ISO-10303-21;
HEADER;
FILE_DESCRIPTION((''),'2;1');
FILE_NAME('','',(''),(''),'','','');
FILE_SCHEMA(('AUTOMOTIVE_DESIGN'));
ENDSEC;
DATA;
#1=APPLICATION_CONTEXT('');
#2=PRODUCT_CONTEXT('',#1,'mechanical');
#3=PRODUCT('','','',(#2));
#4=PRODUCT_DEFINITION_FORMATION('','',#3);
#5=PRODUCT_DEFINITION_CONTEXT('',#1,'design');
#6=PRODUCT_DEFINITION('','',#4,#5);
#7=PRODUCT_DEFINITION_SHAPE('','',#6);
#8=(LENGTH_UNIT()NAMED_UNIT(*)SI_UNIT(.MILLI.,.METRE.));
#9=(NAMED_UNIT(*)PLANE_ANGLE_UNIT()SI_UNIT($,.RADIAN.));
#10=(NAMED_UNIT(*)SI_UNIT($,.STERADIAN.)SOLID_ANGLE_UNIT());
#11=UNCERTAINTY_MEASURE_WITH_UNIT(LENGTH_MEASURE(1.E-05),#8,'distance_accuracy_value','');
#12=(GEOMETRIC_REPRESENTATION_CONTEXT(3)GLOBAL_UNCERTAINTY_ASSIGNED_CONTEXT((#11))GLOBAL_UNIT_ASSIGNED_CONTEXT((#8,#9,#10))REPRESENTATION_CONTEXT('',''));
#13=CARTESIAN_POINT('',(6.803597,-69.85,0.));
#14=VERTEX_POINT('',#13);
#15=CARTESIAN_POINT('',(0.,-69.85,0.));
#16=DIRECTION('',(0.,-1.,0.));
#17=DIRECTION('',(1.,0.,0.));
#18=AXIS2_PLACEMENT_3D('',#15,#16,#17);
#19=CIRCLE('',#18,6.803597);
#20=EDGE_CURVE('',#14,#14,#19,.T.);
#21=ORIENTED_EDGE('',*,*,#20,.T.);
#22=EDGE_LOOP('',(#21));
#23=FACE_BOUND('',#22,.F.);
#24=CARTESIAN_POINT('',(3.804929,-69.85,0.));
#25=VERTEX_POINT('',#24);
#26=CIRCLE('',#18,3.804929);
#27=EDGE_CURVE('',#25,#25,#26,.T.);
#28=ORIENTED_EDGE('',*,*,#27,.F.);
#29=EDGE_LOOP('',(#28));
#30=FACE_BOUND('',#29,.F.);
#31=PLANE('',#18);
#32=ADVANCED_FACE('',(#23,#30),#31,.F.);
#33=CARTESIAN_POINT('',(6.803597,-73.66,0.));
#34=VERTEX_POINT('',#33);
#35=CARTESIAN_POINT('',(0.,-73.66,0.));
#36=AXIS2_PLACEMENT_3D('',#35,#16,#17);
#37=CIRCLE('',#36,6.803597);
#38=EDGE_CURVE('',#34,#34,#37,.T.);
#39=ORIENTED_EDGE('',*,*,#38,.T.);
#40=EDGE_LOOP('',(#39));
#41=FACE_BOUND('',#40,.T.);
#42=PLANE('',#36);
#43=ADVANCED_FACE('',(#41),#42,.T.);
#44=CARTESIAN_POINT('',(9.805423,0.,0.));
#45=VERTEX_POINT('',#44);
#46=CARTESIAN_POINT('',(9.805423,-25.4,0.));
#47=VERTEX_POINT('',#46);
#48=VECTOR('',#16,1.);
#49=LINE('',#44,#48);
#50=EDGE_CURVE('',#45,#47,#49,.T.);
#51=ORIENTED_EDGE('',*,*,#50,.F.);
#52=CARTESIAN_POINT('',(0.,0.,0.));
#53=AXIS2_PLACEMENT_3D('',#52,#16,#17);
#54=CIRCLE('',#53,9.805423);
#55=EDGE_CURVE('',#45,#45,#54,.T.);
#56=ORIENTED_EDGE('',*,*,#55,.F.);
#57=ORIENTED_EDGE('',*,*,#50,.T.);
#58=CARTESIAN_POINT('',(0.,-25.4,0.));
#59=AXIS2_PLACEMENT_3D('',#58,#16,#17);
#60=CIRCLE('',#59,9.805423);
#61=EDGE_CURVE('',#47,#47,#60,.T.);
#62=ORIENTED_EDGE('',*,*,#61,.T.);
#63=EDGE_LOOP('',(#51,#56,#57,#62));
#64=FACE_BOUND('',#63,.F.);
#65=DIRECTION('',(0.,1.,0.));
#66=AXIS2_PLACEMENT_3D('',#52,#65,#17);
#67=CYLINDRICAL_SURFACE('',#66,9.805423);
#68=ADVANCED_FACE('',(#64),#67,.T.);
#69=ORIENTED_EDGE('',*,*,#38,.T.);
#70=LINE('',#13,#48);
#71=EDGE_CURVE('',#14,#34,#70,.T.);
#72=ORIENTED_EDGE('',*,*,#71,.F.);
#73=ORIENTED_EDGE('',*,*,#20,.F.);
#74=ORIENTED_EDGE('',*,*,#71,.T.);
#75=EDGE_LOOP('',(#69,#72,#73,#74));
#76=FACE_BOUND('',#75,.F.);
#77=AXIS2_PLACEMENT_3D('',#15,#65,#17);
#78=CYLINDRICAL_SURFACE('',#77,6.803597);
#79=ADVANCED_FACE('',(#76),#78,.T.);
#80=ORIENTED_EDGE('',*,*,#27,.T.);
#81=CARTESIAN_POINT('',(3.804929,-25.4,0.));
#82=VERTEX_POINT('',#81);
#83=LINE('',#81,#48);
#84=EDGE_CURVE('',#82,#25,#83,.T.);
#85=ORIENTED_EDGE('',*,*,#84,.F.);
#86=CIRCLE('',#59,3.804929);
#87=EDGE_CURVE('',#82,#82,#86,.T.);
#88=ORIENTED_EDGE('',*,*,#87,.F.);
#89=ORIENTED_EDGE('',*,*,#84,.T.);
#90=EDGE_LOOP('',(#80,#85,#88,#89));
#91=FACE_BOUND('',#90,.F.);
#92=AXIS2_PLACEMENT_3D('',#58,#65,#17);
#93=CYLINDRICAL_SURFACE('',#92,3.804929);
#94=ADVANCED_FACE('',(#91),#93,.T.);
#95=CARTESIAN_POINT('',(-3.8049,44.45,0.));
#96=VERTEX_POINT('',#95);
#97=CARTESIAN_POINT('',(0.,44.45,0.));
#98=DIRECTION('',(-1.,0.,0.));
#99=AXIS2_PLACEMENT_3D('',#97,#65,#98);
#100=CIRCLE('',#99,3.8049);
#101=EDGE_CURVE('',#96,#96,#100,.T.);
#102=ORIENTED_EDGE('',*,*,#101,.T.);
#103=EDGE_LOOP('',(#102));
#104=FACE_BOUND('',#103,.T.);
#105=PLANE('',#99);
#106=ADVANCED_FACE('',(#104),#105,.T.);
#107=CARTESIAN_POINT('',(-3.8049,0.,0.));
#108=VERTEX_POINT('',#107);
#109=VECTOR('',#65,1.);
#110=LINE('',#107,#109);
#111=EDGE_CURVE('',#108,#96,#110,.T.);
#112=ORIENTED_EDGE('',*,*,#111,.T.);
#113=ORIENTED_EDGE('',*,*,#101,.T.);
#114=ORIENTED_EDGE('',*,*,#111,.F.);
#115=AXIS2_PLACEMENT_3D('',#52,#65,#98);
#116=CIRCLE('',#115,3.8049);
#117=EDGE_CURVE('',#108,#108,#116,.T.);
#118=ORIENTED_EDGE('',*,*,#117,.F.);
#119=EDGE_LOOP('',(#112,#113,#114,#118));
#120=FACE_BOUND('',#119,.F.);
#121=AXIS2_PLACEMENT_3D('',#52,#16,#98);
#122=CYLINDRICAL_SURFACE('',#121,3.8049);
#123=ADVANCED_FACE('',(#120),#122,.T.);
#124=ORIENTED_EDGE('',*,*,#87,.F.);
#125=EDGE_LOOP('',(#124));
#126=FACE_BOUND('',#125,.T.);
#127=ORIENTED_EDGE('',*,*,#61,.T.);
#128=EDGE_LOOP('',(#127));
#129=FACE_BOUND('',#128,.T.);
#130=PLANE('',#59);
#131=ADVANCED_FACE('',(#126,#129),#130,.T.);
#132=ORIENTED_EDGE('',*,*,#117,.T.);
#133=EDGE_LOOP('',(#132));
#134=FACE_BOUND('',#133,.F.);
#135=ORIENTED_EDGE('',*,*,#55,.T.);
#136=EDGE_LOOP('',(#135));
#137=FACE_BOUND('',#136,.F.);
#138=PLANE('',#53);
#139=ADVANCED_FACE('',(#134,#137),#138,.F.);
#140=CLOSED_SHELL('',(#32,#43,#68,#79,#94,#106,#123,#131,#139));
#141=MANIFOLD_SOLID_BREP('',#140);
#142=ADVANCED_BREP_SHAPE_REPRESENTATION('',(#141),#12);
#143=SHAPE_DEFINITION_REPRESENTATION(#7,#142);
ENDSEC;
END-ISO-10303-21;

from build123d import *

# Parameters (mm, degrees)
F0_R     = 9.8054228033
F1_DEPTH = 25.4
F3_R     = 3.8049000848
F4_DEPTH = 44.45
F2_R     = 3.804929308
F5_DEPTH = 44.45
F6_R     = 6.8035972376
F7_DEPTH = 3.81


# Not quite as in the source:
# - a feature names something its author has since deleted; it is built from what else it names


with BuildPart() as f1:
    # F0 (on Front) → F1 (new body)
    with BuildSketch(Plane.XZ):
        Circle(F0_R)
    extrude(amount=F1_DEPTH)

    # F3 (on face) → F4 (join)
    with BuildSketch(Plane(origin=(0, 0, 0), x_dir=(-1, 0, 0), z_dir=(0, 1, 0))):
        Circle(F3_R)
    extrude(amount=F4_DEPTH)

    # F2 (on face) → F5 (join)
    with BuildSketch(Plane.XZ.offset(25.4)):
        Circle(F2_R)
    extrude(amount=F5_DEPTH)

    # F6 (on face) → F7 (join)
    with BuildSketch(Plane.XZ.offset(69.85)):
        Circle(F6_R)
    extrude(amount=F7_DEPTH)


solid = f1.part
